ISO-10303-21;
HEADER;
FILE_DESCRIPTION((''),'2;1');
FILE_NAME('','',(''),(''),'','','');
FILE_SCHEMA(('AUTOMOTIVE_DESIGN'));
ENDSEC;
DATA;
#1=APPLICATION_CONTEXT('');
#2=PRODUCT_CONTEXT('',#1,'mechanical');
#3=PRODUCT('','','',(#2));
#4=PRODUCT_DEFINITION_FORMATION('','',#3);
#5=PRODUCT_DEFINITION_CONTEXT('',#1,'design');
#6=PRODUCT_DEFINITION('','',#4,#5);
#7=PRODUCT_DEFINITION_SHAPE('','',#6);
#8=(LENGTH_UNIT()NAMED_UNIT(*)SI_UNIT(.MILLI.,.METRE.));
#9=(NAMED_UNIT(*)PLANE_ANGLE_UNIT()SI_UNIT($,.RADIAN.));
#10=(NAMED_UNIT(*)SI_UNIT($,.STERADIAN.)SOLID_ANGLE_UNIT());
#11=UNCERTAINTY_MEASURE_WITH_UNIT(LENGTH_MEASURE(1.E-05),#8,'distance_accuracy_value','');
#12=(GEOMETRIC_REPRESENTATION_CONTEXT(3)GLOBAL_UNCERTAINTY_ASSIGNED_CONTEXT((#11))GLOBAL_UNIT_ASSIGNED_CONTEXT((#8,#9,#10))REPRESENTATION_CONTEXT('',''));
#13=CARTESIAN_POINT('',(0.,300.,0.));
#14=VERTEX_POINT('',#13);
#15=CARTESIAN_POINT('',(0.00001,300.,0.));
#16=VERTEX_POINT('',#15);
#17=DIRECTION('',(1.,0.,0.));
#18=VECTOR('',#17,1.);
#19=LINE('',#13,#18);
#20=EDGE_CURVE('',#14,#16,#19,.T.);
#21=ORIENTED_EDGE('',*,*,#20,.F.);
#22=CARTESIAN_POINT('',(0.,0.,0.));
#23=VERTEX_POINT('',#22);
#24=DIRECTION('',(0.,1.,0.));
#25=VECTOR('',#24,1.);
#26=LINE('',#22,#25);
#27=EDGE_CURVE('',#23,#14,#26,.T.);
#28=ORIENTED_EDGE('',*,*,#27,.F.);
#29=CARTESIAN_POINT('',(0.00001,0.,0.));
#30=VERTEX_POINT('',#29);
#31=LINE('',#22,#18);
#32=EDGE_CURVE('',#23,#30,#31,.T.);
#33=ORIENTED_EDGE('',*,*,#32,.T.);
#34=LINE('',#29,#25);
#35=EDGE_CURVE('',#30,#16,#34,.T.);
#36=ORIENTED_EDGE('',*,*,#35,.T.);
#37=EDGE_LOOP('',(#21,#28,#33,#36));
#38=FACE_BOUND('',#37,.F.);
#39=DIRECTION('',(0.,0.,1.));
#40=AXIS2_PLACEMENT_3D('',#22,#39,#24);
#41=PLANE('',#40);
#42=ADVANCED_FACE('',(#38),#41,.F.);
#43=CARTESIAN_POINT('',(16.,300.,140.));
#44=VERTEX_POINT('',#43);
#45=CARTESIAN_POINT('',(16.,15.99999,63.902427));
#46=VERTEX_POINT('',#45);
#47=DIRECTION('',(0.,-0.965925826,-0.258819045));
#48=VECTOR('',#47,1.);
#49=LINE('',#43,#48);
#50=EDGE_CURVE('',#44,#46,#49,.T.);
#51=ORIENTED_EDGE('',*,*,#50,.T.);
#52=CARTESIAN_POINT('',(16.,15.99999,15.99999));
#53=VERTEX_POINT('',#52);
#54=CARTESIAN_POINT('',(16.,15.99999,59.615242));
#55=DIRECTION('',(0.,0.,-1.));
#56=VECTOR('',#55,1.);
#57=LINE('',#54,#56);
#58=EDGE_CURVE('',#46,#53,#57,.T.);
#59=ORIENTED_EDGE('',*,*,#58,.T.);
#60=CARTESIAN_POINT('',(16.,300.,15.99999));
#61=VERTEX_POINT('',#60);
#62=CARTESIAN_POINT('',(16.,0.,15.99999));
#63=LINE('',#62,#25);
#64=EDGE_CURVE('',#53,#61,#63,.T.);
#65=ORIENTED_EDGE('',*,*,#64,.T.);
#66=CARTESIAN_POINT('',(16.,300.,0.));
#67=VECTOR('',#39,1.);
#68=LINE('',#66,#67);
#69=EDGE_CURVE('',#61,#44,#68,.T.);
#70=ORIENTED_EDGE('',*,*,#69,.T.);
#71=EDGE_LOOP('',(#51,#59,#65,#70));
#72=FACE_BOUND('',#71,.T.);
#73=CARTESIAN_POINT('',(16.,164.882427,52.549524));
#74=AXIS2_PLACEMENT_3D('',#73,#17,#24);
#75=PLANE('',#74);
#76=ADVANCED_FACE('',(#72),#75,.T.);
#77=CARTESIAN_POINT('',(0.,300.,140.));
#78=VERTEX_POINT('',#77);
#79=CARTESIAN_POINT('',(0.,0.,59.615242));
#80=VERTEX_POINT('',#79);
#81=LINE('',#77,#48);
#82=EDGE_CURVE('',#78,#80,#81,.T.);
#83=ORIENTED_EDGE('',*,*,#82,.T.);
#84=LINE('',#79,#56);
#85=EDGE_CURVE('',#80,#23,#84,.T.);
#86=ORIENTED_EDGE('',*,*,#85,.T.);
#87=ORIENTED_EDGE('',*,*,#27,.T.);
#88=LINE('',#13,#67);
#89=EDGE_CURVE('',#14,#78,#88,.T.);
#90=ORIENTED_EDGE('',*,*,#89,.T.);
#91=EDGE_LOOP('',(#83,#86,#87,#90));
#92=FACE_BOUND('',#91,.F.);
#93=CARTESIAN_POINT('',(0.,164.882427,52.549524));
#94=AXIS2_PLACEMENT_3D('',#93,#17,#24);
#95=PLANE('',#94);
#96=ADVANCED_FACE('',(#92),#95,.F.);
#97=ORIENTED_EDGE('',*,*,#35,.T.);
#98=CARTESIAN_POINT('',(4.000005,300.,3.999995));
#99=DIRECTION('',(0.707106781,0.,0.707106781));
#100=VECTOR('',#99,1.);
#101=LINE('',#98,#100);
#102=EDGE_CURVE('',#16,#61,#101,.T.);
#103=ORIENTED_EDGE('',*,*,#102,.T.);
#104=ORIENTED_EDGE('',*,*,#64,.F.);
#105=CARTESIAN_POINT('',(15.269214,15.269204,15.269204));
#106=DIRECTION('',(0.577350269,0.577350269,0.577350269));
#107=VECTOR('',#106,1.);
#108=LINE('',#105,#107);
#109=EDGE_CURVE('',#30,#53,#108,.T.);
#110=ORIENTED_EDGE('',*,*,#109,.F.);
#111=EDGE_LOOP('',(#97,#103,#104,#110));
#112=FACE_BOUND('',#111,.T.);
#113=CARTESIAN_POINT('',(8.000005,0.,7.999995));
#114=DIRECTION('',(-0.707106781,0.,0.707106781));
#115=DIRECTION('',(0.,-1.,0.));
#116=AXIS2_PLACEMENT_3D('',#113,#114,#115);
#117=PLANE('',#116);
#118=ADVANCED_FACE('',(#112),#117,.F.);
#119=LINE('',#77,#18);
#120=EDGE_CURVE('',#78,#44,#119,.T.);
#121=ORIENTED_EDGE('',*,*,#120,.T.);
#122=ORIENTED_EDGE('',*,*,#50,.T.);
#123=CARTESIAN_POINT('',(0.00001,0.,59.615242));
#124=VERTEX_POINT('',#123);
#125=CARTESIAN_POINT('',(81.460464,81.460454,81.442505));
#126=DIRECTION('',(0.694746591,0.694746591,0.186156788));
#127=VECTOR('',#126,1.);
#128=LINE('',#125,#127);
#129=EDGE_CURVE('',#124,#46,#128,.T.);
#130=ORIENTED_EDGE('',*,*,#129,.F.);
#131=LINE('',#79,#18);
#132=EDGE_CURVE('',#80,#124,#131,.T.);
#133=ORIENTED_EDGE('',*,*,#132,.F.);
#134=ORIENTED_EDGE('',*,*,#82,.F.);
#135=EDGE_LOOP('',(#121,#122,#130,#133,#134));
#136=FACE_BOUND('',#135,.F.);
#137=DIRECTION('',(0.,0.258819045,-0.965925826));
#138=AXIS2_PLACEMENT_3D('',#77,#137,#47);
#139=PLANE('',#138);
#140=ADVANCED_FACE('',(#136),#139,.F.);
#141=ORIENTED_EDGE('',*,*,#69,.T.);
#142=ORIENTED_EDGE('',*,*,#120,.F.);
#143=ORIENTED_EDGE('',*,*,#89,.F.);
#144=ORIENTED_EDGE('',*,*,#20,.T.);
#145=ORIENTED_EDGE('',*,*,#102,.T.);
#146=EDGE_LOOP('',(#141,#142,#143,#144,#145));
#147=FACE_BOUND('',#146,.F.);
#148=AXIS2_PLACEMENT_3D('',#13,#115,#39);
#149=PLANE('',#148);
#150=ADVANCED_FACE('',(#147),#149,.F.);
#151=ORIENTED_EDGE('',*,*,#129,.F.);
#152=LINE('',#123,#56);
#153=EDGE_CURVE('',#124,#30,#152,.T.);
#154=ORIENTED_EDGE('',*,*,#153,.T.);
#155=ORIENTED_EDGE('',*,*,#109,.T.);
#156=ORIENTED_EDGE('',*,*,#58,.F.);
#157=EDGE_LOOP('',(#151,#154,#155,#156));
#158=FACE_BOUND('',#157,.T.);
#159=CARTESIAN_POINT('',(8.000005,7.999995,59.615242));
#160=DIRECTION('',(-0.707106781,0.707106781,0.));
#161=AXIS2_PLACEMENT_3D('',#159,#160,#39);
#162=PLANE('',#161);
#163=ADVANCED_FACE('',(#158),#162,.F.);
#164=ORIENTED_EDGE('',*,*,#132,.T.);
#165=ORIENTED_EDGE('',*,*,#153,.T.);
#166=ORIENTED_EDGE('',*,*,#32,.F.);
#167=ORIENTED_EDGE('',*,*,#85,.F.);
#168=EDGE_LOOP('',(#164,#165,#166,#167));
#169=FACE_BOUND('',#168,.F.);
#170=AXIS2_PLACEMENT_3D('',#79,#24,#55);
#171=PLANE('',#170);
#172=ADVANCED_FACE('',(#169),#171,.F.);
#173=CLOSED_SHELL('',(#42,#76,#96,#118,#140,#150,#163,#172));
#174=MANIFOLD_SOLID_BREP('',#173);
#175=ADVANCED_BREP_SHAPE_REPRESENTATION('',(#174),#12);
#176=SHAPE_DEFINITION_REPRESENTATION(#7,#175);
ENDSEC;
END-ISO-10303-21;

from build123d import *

# Parameters (mm, degrees)
F1_DEPTH = 16
F2_SIZE  = 15.99999


# Not quite as in the source:
# - a fillet or chamfer is up to 0.001 mm smaller than in the source, because OpenCascade refuses the exact size


with BuildPart() as f1:
    # F0 (on Right) → F1 (new body)
    with BuildSketch(Plane.YZ):
        Polygon((0, 59.6152422707), (0, 0), (300, 0), (300, 140), align=None)
    extrude(amount=F1_DEPTH)

    # F2 (size 16 in the source; OpenCascade refuses exactly that, so slightly less here)
    f2_edges = [f1.edges().sort_by_distance(p)[0] for p in [
        (16, 150, 0),
        (16, 0, 29.807621),
    ]]
    chamfer(f2_edges, length=F2_SIZE)


solid = f1.part
